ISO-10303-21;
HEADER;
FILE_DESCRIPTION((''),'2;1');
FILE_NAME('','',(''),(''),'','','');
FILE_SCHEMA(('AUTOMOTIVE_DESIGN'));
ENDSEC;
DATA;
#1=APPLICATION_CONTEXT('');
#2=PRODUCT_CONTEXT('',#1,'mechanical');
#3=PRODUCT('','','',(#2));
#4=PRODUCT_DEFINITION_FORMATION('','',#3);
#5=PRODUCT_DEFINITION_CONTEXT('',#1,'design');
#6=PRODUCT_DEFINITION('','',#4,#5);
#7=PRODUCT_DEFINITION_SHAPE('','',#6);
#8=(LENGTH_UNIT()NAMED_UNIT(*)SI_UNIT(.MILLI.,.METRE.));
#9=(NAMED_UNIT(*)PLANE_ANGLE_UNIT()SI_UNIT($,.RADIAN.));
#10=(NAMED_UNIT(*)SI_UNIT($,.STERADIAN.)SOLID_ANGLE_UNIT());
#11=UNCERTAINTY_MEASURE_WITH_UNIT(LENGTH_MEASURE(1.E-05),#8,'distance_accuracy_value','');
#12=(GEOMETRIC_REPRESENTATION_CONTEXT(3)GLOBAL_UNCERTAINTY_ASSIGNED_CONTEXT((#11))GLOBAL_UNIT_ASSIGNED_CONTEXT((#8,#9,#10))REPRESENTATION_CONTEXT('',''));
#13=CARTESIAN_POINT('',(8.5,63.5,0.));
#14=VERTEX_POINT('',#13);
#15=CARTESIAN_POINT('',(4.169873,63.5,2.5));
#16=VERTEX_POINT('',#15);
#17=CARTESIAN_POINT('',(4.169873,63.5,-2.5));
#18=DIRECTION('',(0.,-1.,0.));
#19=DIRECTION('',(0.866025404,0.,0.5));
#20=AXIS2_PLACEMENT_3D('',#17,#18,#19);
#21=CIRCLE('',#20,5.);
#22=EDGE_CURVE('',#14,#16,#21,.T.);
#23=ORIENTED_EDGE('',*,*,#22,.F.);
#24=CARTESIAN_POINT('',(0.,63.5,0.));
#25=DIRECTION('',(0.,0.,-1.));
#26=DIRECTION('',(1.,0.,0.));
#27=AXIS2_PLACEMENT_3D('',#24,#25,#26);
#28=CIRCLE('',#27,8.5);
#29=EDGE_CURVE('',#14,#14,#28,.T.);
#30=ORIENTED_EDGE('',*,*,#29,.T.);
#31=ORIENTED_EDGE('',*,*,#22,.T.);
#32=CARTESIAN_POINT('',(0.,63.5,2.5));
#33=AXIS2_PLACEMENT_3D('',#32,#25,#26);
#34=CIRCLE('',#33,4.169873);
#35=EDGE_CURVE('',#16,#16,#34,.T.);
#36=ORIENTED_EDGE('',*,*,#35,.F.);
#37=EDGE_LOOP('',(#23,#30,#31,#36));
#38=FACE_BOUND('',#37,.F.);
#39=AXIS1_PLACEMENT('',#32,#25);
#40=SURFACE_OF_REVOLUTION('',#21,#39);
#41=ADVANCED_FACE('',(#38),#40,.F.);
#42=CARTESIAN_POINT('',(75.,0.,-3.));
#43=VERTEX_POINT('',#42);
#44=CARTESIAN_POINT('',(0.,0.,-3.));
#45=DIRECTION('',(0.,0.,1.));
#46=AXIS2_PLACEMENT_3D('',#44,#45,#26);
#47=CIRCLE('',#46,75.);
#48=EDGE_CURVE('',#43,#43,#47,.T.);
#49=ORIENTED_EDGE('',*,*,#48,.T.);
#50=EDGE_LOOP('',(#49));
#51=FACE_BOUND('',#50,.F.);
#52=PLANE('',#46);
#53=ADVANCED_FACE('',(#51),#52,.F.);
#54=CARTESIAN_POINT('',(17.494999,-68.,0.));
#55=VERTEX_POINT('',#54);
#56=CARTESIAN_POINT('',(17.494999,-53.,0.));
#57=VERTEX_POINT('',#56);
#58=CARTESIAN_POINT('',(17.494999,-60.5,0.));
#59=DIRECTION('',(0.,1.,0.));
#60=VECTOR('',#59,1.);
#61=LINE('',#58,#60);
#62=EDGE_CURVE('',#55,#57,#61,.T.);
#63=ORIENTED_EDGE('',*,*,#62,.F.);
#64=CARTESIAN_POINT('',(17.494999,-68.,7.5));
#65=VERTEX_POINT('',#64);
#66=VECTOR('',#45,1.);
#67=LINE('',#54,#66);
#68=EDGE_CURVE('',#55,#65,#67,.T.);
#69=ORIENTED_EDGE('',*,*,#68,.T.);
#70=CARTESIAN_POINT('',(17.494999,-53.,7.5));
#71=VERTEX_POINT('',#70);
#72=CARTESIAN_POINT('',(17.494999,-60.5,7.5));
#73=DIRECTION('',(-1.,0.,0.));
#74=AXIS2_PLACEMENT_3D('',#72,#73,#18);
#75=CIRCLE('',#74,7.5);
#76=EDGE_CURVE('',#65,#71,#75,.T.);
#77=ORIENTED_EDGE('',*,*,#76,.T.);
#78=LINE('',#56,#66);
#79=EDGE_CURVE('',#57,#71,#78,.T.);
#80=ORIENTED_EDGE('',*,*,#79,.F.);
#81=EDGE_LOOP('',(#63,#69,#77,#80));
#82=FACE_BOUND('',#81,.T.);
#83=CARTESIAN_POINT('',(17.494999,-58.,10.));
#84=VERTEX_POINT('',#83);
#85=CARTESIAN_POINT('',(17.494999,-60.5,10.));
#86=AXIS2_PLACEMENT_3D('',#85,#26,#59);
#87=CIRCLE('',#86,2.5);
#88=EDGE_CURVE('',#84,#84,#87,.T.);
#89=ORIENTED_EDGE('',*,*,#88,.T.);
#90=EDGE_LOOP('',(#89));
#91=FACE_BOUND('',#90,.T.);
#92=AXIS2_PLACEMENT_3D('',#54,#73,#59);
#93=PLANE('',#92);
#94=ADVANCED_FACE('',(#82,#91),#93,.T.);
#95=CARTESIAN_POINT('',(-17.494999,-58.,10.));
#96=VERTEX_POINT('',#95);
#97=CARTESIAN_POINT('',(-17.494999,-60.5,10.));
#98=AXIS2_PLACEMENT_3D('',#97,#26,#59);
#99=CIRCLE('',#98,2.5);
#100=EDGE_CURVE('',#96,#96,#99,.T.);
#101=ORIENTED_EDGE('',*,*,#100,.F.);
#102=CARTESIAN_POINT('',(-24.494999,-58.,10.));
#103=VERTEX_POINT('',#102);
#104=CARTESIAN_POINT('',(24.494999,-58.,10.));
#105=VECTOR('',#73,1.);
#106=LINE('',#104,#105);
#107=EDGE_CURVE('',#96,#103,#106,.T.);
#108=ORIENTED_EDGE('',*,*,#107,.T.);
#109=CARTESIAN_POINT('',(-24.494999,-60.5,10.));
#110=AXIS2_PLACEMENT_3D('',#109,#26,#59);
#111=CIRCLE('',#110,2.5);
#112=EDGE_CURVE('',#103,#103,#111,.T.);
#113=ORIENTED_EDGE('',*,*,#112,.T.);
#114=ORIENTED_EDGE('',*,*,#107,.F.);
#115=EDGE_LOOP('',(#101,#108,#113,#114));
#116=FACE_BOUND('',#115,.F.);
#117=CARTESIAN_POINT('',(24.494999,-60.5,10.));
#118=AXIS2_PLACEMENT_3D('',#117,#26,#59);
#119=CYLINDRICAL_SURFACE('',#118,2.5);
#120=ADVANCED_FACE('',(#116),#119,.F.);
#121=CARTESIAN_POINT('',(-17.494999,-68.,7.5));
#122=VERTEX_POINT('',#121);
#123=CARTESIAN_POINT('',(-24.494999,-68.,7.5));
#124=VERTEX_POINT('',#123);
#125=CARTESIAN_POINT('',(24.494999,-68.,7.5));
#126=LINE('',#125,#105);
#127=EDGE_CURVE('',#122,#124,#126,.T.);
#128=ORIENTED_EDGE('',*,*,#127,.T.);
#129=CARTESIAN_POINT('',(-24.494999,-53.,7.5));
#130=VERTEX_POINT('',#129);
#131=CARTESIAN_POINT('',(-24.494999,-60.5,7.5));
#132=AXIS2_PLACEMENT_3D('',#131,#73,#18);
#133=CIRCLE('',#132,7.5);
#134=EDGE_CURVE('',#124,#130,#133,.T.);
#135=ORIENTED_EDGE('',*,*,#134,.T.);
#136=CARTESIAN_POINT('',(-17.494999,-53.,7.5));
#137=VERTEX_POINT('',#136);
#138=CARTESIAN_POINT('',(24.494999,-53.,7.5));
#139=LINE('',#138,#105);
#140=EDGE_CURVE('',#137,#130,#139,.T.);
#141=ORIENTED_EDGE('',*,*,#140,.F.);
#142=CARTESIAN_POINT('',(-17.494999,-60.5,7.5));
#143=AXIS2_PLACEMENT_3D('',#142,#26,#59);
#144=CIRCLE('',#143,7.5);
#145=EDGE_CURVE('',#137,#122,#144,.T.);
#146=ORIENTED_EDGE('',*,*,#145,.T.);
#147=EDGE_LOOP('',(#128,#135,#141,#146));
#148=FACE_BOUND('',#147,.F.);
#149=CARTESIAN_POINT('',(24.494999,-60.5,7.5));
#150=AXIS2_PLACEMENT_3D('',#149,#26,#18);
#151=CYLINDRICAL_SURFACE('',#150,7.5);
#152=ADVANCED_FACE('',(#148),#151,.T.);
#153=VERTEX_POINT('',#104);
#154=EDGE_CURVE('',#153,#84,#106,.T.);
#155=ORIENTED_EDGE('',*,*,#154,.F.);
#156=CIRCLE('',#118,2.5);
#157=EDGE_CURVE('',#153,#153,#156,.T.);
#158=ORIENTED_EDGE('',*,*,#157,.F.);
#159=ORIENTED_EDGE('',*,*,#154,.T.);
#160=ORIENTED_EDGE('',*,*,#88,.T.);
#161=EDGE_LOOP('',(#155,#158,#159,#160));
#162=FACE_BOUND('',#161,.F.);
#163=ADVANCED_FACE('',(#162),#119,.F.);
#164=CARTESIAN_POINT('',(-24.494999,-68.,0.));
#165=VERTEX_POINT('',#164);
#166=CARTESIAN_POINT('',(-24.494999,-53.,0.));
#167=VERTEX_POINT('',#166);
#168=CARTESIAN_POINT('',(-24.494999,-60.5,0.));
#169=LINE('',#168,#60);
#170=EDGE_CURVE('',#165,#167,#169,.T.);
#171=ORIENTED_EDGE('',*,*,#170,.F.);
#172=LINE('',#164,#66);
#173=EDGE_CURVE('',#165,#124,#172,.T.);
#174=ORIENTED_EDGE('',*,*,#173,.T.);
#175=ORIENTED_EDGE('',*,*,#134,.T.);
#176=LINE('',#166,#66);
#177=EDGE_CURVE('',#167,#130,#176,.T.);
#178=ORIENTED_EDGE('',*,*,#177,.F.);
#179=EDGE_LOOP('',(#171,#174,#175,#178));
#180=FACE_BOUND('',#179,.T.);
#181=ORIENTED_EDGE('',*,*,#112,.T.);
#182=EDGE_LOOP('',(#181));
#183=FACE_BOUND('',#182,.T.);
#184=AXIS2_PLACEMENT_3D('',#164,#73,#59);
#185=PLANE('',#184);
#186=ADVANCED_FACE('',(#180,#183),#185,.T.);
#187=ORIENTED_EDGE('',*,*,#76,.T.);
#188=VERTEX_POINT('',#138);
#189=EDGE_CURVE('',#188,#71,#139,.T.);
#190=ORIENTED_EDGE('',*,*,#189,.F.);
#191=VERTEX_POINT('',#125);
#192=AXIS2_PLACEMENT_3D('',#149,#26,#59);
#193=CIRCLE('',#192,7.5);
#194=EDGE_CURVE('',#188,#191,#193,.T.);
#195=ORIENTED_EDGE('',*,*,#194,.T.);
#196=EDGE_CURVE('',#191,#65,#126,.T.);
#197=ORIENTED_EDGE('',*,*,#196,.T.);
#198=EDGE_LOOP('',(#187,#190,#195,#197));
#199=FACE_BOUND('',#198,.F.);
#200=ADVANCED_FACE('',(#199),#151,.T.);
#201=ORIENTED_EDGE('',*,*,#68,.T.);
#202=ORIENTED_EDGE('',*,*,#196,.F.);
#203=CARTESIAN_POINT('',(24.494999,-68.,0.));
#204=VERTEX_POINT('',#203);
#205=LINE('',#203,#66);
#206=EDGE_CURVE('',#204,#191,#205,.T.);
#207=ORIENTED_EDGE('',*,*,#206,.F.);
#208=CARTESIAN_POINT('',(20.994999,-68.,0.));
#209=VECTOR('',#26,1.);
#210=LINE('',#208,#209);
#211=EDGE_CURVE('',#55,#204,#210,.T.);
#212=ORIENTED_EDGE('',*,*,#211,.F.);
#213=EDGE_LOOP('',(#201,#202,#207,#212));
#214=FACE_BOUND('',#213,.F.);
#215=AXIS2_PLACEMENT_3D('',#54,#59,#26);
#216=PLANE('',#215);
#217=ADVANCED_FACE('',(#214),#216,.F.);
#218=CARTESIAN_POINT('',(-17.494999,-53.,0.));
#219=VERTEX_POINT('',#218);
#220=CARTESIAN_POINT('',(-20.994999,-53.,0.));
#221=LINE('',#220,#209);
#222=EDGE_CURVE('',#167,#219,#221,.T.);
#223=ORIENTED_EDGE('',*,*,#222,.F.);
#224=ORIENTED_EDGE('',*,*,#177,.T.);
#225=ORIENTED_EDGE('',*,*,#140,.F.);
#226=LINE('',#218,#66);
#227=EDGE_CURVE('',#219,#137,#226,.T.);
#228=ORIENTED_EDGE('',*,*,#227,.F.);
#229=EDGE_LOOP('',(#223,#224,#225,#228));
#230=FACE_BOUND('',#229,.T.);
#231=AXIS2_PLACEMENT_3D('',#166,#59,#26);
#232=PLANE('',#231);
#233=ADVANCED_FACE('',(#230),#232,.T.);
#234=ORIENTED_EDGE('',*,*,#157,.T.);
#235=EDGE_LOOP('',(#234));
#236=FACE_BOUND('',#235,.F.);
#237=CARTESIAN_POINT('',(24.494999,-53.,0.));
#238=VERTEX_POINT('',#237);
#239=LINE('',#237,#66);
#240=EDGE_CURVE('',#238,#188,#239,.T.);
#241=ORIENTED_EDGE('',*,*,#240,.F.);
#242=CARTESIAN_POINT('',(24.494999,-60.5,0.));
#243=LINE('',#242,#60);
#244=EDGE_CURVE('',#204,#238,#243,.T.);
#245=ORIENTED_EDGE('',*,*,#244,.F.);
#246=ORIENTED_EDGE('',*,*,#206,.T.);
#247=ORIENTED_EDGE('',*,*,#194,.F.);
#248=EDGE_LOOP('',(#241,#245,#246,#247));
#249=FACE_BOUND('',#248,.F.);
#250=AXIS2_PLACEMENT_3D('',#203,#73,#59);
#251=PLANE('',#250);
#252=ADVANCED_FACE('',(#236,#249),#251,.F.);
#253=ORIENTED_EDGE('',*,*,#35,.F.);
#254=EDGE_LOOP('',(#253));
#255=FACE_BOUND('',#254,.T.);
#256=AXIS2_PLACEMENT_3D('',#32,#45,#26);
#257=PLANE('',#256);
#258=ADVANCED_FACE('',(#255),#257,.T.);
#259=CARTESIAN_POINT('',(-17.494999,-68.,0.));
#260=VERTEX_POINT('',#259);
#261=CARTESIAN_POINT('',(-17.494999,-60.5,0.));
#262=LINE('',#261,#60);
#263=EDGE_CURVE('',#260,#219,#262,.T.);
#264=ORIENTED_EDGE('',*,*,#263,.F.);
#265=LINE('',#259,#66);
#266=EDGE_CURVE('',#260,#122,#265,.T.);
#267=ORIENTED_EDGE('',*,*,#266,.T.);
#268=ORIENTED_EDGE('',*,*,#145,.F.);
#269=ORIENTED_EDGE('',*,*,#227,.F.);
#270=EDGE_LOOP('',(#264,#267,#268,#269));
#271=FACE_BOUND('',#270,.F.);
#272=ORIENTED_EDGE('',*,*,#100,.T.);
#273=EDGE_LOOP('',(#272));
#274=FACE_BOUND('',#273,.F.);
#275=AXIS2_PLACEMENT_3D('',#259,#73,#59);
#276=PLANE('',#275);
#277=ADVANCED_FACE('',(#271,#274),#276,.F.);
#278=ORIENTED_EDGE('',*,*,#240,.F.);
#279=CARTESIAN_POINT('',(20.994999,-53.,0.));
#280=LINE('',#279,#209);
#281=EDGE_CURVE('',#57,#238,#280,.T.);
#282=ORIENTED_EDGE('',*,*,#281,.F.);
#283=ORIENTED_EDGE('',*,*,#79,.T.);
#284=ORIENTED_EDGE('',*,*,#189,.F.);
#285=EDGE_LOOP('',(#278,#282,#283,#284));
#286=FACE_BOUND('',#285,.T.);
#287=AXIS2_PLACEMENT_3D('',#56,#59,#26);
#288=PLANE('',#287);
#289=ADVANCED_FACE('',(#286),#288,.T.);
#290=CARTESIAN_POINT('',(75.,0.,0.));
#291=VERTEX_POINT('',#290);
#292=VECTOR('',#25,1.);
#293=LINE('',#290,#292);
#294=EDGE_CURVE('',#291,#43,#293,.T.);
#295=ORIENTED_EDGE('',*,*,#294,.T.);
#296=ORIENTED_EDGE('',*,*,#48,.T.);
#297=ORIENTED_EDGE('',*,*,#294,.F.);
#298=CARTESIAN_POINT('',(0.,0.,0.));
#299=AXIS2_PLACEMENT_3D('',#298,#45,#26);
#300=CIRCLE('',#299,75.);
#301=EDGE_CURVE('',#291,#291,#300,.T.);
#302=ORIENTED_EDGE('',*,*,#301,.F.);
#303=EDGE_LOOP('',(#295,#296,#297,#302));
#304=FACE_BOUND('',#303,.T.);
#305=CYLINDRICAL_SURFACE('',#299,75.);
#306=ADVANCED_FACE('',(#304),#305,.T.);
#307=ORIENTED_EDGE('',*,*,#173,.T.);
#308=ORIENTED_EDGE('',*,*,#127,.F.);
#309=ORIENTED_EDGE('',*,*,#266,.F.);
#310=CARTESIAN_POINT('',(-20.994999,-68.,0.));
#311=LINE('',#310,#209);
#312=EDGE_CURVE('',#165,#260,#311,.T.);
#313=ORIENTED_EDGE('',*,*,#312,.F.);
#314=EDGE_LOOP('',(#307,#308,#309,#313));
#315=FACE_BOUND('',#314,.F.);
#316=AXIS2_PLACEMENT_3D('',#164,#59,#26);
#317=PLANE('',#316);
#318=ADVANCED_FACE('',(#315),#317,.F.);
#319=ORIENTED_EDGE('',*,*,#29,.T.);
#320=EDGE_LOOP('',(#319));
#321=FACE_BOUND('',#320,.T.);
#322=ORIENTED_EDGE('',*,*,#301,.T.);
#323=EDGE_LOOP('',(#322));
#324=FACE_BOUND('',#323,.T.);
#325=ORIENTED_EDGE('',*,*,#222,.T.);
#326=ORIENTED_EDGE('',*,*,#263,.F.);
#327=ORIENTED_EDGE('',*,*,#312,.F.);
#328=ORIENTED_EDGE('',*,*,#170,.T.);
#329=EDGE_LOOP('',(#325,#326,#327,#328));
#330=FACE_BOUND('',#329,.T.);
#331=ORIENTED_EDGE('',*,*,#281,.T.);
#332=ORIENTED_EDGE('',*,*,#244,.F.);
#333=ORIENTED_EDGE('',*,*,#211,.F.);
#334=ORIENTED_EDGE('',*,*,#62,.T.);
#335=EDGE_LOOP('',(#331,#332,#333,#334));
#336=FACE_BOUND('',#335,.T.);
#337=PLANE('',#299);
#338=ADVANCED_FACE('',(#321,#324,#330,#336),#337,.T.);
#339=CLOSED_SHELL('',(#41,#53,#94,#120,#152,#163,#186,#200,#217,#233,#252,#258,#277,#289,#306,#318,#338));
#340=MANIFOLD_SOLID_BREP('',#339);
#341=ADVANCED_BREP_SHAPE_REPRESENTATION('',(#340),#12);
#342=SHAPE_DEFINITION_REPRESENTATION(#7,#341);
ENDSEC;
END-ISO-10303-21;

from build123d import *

# Parameters (mm, degrees)
F0_R     = 75
F0_W     = 7
F0_H     = 15
F1_DEPTH = 3
F2_DEPTH = 15
F3_R     = 2.5
F4_DEPTH = 99.4959988723
F5_R     = 8.5
F6_DEPTH = 2.5
F6_TAPER = 10


# Not quite as in the source:
# - a fillet or chamfer that OpenCascade refuses, or shapes differently, is made with other operations: its cross-section is extruded or revolved along the edge and cut away or added


with BuildPart() as f1:
    # F0 (on Top) → F1 (new body)
    with BuildSketch(Plane.XY):
        Circle(F0_R)
        with Locations((-20.9949988723, -60.5)):
            Rectangle(F0_W, F0_H, mode=Mode.SUBTRACT)
        with Locations((20.9949988723, -60.5)):
            Rectangle(F0_W, F0_H, mode=Mode.SUBTRACT)
        with Locations((-20.9949988723, -60.5)):
            Rectangle(F0_W, F0_H)
        with Locations((20.9949988723, -60.5)):
            Rectangle(F0_W, F0_H)
    extrude(amount=-F1_DEPTH)

    # F0 (on Top) → F2 (join)
    with BuildSketch(Plane.XY):
        with Locations((20.9949988723, -60.5)):
            Rectangle(F0_W, F0_H)
        with Locations((-20.9949988723, -60.5)):
            Rectangle(F0_W, F0_H)
    extrude(amount=F2_DEPTH)

    # F3 (on face) → F4 (cut, through all)
    with BuildSketch(Plane.YZ.offset(24.4949988723)):
        with BuildLine():
            ThreePointArc((-68, 7.5), (-65.8033008589, 12.8033008589), (-60.5, 15))
            Line((-60.5, 15), (-68, 15))
            Line((-68, 15), (-68, 7.5))
        make_face()
        with BuildLine():
            ThreePointArc((-60.5, 15), (-55.1966991411, 12.8033008589), (-53, 7.5))
            Line((-53, 7.5), (-53, 15))
            Line((-53, 15), (-60.5, 15))
        make_face()
        with Locations((-60.5, 10)):
            Circle(F3_R)
    extrude(amount=-F4_DEPTH, mode=Mode.SUBTRACT)

    # F5 (on face) → F6 (join)
    with BuildSketch(Plane.XY):
        with Locations((0, 63.5)):
            Circle(F5_R)
    extrude(amount=F6_DEPTH, taper=F6_TAPER)

    # F7: fillet of radius 5 on 1 edges, made by hand

    # F7_s1 → F7_t2 (revolve, cut)
    with BuildSketch(Plane.XZ.offset(-63.5)):
        with BuildLine():
            ThreePointArc((8.5, 0), (6.6698729811, 1.8301270189), (4.1698729811, 2.5))
            Line((4.1698729811, 2.5), (8.0591825482, 2.5))
            Line((8.0591825482, 2.5), (8.5, 0))
        make_face()
    revolve(axis=Axis((0, 63.5, 2.5), (0, 0, -1)), mode=Mode.SUBTRACT)


solid = f1.part
